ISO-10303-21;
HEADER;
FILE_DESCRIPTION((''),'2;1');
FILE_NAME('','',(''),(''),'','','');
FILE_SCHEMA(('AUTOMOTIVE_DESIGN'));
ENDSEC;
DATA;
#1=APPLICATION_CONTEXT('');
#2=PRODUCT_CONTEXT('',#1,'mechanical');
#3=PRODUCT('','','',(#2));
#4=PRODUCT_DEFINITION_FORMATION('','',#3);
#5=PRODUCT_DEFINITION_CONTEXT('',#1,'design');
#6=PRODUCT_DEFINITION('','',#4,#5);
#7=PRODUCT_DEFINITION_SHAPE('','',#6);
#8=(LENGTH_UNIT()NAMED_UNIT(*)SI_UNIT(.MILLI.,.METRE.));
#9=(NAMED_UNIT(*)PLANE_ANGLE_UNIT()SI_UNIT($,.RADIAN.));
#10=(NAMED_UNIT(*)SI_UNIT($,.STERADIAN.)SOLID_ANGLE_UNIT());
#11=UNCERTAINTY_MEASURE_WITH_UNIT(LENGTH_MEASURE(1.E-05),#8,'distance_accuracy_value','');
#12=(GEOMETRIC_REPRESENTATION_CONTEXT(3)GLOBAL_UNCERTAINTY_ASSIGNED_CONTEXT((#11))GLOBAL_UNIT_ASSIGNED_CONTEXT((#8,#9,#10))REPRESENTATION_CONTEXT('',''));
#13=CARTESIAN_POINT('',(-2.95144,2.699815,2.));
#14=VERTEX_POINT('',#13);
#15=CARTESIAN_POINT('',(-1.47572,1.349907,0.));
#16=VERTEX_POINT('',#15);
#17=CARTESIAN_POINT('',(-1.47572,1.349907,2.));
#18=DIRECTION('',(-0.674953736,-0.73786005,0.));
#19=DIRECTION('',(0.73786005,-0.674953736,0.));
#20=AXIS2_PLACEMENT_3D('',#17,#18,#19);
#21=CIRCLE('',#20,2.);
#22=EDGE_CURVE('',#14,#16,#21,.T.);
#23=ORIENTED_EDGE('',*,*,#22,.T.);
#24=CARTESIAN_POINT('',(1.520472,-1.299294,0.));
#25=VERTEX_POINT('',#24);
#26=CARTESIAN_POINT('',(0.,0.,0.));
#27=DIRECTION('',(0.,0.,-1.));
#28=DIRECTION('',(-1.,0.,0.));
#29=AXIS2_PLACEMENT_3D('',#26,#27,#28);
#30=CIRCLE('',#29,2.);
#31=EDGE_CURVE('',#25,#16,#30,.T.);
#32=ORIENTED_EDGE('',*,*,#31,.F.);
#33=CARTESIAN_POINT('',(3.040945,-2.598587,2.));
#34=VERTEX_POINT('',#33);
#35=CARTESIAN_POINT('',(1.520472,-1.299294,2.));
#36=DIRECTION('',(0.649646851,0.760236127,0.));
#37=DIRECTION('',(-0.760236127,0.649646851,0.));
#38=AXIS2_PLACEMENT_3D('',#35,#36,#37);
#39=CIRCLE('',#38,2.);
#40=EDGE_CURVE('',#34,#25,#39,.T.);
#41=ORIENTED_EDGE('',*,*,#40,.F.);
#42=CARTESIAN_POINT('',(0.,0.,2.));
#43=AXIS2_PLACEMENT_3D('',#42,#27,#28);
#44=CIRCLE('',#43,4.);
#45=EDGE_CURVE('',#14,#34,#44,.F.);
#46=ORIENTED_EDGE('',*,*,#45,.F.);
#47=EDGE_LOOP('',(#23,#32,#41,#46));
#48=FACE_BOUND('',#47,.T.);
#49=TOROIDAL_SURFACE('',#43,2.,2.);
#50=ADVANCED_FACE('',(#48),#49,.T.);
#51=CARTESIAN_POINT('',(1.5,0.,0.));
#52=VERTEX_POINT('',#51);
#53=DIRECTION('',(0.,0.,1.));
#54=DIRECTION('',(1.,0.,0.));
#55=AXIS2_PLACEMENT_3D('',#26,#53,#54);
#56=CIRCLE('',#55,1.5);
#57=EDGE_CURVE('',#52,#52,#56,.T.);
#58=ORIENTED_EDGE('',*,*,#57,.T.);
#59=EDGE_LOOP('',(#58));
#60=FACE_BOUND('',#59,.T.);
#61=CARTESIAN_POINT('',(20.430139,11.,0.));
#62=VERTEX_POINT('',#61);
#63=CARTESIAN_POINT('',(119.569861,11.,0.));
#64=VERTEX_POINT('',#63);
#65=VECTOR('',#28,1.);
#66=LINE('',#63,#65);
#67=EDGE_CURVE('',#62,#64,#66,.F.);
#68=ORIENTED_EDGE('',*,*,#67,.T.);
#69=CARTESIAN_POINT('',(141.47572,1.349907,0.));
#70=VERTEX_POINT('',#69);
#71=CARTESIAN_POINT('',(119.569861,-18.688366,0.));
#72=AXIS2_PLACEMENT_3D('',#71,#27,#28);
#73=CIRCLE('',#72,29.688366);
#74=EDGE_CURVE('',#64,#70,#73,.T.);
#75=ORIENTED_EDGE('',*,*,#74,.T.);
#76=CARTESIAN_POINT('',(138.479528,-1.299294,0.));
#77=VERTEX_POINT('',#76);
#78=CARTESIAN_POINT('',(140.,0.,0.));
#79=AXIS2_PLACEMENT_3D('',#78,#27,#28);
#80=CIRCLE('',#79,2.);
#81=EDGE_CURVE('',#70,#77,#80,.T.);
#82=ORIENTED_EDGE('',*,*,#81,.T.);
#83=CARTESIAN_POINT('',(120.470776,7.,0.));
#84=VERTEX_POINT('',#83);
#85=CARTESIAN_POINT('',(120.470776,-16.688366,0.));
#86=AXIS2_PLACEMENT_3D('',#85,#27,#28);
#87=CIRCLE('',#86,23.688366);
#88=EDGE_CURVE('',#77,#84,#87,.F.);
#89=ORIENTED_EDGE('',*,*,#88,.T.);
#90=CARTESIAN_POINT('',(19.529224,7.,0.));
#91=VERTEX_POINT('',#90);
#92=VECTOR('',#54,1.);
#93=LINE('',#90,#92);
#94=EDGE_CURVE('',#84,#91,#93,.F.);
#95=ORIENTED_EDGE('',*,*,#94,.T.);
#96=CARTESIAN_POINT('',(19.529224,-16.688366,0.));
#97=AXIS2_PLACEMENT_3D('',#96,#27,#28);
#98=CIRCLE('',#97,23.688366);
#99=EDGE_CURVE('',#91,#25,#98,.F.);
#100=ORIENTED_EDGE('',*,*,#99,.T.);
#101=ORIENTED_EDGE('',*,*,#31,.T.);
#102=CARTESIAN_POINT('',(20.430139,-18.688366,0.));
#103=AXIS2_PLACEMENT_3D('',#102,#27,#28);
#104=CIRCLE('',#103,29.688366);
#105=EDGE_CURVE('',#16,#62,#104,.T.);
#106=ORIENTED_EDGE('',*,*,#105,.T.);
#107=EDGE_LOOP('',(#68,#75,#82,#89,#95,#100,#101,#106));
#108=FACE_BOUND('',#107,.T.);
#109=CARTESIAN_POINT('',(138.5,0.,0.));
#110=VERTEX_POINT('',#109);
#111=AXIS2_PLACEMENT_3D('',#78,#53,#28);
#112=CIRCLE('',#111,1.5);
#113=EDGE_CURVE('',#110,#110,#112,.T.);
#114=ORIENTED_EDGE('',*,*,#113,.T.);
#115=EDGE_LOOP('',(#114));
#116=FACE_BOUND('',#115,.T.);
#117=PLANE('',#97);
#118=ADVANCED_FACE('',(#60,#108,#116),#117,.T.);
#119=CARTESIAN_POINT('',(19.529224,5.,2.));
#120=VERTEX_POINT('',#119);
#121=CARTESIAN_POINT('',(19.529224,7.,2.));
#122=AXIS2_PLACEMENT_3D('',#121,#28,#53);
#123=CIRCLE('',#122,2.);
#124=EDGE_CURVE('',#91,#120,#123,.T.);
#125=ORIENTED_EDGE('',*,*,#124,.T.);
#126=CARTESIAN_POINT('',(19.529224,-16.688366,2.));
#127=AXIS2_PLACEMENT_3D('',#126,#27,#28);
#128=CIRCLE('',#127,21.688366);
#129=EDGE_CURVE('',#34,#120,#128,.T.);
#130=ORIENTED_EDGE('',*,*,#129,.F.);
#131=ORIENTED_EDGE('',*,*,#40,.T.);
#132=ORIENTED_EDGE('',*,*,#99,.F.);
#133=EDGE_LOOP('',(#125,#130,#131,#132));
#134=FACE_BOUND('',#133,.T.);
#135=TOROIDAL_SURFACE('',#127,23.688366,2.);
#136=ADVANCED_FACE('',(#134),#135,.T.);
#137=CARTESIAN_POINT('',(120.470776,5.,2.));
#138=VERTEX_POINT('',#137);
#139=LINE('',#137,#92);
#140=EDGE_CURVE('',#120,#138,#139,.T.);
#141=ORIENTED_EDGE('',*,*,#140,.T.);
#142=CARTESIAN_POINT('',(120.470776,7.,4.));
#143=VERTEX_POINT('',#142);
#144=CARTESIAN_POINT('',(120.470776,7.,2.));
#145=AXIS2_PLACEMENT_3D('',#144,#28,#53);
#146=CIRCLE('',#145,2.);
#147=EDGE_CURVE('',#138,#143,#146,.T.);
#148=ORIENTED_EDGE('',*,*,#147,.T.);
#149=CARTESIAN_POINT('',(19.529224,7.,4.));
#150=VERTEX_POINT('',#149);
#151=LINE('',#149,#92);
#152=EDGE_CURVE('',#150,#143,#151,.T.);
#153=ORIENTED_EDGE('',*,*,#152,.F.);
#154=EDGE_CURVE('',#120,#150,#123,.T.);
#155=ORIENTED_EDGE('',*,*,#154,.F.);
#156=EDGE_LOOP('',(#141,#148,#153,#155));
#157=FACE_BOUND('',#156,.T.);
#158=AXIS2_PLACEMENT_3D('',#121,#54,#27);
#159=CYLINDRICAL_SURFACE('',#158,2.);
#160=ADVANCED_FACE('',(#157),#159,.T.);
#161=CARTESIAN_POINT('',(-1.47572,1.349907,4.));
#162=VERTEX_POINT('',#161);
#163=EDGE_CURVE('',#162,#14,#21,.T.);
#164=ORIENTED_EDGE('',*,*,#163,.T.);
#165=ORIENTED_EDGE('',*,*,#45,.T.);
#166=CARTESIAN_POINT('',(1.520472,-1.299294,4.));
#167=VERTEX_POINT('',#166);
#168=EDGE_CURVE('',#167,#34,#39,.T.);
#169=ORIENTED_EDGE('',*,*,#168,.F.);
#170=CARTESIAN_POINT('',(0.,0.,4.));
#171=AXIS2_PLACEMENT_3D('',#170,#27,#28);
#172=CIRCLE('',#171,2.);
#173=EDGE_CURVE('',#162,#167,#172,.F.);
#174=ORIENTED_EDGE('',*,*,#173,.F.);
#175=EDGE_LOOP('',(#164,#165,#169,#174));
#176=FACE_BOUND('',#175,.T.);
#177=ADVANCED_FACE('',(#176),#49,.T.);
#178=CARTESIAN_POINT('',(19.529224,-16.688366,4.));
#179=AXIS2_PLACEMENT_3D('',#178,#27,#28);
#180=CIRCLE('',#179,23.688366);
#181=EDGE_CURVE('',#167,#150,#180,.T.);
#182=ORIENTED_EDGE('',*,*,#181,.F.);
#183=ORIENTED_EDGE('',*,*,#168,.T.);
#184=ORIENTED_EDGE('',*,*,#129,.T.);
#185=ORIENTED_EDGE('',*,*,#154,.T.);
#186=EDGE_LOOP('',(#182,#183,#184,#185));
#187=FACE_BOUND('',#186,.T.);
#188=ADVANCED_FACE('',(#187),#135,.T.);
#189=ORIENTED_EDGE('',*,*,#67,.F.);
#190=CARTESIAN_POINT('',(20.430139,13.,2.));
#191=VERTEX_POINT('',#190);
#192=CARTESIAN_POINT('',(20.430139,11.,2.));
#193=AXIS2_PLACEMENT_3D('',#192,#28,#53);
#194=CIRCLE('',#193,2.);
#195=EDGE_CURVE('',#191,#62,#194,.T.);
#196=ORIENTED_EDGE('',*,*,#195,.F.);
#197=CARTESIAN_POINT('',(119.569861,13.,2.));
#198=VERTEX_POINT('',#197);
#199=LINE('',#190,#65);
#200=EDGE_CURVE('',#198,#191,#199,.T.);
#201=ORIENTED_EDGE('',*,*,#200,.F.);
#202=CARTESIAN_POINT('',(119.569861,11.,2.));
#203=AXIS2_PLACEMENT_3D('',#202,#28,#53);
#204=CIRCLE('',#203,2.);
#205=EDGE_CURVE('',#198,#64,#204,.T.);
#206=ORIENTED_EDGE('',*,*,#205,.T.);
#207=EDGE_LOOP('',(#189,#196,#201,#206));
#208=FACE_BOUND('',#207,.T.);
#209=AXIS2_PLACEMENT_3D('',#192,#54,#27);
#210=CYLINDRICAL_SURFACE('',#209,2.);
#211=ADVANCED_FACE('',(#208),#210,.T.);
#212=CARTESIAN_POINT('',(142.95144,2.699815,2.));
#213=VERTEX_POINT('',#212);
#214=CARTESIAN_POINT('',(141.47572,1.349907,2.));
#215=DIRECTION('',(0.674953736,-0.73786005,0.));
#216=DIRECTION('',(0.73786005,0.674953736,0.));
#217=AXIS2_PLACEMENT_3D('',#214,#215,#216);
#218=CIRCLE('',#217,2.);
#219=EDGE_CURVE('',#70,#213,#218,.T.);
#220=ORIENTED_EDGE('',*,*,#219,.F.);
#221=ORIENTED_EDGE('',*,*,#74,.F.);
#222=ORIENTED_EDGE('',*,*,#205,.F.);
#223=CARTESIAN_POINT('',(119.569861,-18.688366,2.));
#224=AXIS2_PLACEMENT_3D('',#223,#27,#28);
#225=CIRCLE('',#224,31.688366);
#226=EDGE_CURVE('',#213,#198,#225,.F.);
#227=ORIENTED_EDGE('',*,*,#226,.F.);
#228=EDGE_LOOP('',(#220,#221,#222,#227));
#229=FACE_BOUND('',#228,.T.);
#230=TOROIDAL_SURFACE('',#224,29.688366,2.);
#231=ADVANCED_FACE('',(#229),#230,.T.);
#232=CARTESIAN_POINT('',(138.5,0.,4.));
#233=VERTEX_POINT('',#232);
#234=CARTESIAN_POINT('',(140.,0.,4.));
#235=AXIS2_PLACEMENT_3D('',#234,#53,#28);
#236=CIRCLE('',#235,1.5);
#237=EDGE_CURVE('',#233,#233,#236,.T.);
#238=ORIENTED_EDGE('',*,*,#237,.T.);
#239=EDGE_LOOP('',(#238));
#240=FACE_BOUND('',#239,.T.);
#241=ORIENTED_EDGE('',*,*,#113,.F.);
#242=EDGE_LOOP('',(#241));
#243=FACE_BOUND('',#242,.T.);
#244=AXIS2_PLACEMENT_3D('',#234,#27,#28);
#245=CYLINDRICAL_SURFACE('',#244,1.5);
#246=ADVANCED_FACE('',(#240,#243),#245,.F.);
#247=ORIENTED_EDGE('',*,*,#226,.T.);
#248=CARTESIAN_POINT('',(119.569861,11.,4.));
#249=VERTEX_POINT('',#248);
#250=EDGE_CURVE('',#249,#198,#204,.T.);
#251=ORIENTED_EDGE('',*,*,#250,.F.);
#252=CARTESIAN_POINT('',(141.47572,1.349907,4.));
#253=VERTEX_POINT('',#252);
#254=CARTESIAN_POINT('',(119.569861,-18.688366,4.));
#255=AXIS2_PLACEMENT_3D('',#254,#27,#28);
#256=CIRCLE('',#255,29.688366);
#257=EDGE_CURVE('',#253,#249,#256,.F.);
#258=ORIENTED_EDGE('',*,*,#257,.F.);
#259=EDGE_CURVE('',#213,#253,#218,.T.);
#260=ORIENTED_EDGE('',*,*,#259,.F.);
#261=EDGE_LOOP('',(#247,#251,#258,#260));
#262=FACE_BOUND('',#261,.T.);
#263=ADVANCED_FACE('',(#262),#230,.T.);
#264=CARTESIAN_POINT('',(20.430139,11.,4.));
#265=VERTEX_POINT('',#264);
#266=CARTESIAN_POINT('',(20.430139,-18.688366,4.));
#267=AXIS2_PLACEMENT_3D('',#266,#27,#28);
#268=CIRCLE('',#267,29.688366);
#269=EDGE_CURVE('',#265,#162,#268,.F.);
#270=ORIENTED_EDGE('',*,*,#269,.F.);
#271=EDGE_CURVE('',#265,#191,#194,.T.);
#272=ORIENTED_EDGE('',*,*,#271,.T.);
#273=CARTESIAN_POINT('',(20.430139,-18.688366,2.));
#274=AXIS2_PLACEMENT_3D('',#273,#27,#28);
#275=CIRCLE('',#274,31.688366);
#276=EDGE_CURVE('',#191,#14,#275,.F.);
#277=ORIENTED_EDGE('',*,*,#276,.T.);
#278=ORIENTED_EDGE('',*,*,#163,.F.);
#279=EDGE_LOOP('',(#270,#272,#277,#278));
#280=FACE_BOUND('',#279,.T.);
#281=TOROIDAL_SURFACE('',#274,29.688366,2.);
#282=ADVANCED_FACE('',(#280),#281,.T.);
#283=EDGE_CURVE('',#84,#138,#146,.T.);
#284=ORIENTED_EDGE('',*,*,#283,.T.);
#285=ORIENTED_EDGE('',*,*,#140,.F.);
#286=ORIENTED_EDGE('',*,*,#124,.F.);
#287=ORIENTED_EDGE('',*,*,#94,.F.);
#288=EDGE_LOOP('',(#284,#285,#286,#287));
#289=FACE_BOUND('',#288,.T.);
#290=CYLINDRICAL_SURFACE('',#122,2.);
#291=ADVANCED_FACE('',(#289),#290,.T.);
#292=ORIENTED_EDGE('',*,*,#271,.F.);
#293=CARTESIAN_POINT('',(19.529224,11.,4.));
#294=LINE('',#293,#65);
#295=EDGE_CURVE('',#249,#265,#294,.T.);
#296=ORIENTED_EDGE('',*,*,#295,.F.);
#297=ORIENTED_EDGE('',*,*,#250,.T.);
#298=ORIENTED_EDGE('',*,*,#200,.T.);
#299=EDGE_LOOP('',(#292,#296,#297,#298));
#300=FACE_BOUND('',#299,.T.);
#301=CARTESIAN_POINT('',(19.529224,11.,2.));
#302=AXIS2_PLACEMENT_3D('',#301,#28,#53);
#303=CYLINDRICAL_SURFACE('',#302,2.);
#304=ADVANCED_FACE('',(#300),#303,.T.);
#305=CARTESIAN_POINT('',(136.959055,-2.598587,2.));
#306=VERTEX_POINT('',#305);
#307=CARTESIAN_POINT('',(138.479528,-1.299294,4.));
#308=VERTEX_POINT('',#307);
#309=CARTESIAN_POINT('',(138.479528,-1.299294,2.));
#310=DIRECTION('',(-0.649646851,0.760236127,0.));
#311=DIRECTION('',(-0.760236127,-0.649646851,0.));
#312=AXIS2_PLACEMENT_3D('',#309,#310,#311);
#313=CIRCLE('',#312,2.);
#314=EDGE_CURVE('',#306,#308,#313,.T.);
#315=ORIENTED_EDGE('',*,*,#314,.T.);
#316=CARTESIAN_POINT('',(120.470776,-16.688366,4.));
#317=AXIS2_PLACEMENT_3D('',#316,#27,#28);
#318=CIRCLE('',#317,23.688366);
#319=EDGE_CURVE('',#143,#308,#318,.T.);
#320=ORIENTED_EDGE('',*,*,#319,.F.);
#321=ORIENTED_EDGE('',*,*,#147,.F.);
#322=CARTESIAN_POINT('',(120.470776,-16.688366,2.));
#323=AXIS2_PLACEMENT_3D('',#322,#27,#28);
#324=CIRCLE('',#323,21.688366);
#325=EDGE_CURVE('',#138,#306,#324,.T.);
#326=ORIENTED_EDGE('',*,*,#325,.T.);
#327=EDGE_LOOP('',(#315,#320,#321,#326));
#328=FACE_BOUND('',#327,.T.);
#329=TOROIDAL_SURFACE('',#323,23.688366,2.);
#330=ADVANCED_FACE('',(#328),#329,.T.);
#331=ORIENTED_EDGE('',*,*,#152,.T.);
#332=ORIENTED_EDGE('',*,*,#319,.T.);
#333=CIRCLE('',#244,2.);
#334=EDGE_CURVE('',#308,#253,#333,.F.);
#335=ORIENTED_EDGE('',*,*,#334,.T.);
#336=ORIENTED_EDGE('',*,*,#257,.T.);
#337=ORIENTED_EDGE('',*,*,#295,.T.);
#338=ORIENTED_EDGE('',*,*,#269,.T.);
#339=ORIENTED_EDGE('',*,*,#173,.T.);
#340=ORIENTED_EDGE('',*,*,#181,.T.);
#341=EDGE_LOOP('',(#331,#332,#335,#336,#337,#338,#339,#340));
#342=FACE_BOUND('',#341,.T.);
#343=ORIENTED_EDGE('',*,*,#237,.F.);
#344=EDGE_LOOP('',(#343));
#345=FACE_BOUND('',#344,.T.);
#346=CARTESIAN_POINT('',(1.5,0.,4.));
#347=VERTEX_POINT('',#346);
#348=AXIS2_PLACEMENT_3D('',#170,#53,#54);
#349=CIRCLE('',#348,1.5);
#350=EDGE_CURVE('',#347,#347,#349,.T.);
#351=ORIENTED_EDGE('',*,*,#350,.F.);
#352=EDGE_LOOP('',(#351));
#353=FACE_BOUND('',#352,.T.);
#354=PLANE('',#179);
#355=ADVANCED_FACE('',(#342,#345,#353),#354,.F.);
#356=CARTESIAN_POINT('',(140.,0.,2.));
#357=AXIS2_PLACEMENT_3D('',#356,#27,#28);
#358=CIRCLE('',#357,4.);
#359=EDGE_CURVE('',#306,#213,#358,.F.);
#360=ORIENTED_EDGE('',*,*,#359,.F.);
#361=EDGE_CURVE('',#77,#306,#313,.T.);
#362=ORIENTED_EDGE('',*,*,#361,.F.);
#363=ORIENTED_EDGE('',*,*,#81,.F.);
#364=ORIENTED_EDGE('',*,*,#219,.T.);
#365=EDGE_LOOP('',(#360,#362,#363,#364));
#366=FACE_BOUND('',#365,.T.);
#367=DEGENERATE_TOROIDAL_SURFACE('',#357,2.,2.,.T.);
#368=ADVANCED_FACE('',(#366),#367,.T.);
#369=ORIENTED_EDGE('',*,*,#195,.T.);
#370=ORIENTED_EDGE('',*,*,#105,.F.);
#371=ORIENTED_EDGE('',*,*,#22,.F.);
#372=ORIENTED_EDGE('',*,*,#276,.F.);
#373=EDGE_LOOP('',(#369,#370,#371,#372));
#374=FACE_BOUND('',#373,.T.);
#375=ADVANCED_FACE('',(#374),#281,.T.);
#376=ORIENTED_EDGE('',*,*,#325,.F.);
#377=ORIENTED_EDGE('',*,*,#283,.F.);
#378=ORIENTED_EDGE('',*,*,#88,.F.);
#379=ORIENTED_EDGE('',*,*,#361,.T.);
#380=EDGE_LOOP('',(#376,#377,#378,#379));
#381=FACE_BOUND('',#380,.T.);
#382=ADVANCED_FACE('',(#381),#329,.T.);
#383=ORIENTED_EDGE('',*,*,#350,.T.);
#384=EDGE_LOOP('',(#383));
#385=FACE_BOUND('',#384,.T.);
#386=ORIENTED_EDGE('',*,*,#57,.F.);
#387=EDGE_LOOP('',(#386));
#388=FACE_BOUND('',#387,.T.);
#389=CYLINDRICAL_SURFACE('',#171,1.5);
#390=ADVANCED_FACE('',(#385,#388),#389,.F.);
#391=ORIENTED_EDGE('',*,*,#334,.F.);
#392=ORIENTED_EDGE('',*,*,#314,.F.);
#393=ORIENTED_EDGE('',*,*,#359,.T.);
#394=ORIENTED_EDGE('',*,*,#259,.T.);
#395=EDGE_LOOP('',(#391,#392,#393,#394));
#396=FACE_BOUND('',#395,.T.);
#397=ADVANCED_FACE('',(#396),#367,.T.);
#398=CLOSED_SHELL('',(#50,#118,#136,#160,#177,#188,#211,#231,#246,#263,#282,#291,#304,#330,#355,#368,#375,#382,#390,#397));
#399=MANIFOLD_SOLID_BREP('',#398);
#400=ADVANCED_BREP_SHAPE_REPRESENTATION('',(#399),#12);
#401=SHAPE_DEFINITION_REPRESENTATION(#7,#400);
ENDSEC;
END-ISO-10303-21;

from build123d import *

# Parameters (mm, degrees)
SKETCH1_R           = 1.5
BOSS_EXTRUDE1_DEPTH = 4
FILLET1_R           = 2


with BuildPart() as part:
    # Sketch1 → Boss-Extrude1 (new body)
    with BuildSketch(Plane.XY):
        with BuildLine():
            Line((20.430139316, 13), (119.569860684, 13))
            ThreePointArc((119.569860684, 13), (132.344758657, 10.310849901), (142.951440202, 2.699814945))
            ThreePointArc((142.951440202, 2.699814945), (142.64957914, -2.996619826), (136.959055493, -2.598587405))
            ThreePointArc((136.959055493, -2.598587405), (129.548246583, 3.008962434), (120.470775938, 5))
            Line((120.470775938, 5), (19.529224062, 5))
            ThreePointArc((19.529224062, 5), (10.451753417, 3.008962434), (3.040944507, -2.598587405))
            ThreePointArc((3.040944507, -2.598587405), (-2.64957914, -2.996619826), (-2.951440202, 2.699814945))
            ThreePointArc((-2.951440202, 2.699814945), (7.655241343, 10.310849901), (20.430139316, 13))
        make_face()
        Circle(SKETCH1_R, mode=Mode.SUBTRACT)
        with Locations(Location((140, 0, 0), (0, 0, 180))):
            Circle(SKETCH1_R, mode=Mode.SUBTRACT)
    extrude(amount=BOSS_EXTRUDE1_DEPTH)

    # Fillet1
    fillet1_edges = [part.edges().sort_by_distance(p)[0] for p in [
        (10.451753417, 3.008962434, 4),
        (-2.64957914, -2.996619826, 4),
        (7.655241343, 10.310849901, 4),
        (70, 13, 4),
        (132.344758657, 10.310849901, 4),
        (142.64957914, -2.996619826, 4),
        (129.548246583, 3.008962434, 4),
        (10.451753417, 3.008962434, 0),
        (-2.64957914, -2.996619826, 0),
        (7.655241343, 10.310849901, 0),
        (70, 13, 0),
        (132.344758657, 10.310849901, 0),
        (142.64957914, -2.996619826, 0),
        (129.548246583, 3.008962434, 0),
        (70, 5, 4),
        (70, 5, 0),
    ]]
    fillet(fillet1_edges, radius=FILLET1_R - 0.0001)  # a hair under: the kernel refuses the full size


solid = part.part
